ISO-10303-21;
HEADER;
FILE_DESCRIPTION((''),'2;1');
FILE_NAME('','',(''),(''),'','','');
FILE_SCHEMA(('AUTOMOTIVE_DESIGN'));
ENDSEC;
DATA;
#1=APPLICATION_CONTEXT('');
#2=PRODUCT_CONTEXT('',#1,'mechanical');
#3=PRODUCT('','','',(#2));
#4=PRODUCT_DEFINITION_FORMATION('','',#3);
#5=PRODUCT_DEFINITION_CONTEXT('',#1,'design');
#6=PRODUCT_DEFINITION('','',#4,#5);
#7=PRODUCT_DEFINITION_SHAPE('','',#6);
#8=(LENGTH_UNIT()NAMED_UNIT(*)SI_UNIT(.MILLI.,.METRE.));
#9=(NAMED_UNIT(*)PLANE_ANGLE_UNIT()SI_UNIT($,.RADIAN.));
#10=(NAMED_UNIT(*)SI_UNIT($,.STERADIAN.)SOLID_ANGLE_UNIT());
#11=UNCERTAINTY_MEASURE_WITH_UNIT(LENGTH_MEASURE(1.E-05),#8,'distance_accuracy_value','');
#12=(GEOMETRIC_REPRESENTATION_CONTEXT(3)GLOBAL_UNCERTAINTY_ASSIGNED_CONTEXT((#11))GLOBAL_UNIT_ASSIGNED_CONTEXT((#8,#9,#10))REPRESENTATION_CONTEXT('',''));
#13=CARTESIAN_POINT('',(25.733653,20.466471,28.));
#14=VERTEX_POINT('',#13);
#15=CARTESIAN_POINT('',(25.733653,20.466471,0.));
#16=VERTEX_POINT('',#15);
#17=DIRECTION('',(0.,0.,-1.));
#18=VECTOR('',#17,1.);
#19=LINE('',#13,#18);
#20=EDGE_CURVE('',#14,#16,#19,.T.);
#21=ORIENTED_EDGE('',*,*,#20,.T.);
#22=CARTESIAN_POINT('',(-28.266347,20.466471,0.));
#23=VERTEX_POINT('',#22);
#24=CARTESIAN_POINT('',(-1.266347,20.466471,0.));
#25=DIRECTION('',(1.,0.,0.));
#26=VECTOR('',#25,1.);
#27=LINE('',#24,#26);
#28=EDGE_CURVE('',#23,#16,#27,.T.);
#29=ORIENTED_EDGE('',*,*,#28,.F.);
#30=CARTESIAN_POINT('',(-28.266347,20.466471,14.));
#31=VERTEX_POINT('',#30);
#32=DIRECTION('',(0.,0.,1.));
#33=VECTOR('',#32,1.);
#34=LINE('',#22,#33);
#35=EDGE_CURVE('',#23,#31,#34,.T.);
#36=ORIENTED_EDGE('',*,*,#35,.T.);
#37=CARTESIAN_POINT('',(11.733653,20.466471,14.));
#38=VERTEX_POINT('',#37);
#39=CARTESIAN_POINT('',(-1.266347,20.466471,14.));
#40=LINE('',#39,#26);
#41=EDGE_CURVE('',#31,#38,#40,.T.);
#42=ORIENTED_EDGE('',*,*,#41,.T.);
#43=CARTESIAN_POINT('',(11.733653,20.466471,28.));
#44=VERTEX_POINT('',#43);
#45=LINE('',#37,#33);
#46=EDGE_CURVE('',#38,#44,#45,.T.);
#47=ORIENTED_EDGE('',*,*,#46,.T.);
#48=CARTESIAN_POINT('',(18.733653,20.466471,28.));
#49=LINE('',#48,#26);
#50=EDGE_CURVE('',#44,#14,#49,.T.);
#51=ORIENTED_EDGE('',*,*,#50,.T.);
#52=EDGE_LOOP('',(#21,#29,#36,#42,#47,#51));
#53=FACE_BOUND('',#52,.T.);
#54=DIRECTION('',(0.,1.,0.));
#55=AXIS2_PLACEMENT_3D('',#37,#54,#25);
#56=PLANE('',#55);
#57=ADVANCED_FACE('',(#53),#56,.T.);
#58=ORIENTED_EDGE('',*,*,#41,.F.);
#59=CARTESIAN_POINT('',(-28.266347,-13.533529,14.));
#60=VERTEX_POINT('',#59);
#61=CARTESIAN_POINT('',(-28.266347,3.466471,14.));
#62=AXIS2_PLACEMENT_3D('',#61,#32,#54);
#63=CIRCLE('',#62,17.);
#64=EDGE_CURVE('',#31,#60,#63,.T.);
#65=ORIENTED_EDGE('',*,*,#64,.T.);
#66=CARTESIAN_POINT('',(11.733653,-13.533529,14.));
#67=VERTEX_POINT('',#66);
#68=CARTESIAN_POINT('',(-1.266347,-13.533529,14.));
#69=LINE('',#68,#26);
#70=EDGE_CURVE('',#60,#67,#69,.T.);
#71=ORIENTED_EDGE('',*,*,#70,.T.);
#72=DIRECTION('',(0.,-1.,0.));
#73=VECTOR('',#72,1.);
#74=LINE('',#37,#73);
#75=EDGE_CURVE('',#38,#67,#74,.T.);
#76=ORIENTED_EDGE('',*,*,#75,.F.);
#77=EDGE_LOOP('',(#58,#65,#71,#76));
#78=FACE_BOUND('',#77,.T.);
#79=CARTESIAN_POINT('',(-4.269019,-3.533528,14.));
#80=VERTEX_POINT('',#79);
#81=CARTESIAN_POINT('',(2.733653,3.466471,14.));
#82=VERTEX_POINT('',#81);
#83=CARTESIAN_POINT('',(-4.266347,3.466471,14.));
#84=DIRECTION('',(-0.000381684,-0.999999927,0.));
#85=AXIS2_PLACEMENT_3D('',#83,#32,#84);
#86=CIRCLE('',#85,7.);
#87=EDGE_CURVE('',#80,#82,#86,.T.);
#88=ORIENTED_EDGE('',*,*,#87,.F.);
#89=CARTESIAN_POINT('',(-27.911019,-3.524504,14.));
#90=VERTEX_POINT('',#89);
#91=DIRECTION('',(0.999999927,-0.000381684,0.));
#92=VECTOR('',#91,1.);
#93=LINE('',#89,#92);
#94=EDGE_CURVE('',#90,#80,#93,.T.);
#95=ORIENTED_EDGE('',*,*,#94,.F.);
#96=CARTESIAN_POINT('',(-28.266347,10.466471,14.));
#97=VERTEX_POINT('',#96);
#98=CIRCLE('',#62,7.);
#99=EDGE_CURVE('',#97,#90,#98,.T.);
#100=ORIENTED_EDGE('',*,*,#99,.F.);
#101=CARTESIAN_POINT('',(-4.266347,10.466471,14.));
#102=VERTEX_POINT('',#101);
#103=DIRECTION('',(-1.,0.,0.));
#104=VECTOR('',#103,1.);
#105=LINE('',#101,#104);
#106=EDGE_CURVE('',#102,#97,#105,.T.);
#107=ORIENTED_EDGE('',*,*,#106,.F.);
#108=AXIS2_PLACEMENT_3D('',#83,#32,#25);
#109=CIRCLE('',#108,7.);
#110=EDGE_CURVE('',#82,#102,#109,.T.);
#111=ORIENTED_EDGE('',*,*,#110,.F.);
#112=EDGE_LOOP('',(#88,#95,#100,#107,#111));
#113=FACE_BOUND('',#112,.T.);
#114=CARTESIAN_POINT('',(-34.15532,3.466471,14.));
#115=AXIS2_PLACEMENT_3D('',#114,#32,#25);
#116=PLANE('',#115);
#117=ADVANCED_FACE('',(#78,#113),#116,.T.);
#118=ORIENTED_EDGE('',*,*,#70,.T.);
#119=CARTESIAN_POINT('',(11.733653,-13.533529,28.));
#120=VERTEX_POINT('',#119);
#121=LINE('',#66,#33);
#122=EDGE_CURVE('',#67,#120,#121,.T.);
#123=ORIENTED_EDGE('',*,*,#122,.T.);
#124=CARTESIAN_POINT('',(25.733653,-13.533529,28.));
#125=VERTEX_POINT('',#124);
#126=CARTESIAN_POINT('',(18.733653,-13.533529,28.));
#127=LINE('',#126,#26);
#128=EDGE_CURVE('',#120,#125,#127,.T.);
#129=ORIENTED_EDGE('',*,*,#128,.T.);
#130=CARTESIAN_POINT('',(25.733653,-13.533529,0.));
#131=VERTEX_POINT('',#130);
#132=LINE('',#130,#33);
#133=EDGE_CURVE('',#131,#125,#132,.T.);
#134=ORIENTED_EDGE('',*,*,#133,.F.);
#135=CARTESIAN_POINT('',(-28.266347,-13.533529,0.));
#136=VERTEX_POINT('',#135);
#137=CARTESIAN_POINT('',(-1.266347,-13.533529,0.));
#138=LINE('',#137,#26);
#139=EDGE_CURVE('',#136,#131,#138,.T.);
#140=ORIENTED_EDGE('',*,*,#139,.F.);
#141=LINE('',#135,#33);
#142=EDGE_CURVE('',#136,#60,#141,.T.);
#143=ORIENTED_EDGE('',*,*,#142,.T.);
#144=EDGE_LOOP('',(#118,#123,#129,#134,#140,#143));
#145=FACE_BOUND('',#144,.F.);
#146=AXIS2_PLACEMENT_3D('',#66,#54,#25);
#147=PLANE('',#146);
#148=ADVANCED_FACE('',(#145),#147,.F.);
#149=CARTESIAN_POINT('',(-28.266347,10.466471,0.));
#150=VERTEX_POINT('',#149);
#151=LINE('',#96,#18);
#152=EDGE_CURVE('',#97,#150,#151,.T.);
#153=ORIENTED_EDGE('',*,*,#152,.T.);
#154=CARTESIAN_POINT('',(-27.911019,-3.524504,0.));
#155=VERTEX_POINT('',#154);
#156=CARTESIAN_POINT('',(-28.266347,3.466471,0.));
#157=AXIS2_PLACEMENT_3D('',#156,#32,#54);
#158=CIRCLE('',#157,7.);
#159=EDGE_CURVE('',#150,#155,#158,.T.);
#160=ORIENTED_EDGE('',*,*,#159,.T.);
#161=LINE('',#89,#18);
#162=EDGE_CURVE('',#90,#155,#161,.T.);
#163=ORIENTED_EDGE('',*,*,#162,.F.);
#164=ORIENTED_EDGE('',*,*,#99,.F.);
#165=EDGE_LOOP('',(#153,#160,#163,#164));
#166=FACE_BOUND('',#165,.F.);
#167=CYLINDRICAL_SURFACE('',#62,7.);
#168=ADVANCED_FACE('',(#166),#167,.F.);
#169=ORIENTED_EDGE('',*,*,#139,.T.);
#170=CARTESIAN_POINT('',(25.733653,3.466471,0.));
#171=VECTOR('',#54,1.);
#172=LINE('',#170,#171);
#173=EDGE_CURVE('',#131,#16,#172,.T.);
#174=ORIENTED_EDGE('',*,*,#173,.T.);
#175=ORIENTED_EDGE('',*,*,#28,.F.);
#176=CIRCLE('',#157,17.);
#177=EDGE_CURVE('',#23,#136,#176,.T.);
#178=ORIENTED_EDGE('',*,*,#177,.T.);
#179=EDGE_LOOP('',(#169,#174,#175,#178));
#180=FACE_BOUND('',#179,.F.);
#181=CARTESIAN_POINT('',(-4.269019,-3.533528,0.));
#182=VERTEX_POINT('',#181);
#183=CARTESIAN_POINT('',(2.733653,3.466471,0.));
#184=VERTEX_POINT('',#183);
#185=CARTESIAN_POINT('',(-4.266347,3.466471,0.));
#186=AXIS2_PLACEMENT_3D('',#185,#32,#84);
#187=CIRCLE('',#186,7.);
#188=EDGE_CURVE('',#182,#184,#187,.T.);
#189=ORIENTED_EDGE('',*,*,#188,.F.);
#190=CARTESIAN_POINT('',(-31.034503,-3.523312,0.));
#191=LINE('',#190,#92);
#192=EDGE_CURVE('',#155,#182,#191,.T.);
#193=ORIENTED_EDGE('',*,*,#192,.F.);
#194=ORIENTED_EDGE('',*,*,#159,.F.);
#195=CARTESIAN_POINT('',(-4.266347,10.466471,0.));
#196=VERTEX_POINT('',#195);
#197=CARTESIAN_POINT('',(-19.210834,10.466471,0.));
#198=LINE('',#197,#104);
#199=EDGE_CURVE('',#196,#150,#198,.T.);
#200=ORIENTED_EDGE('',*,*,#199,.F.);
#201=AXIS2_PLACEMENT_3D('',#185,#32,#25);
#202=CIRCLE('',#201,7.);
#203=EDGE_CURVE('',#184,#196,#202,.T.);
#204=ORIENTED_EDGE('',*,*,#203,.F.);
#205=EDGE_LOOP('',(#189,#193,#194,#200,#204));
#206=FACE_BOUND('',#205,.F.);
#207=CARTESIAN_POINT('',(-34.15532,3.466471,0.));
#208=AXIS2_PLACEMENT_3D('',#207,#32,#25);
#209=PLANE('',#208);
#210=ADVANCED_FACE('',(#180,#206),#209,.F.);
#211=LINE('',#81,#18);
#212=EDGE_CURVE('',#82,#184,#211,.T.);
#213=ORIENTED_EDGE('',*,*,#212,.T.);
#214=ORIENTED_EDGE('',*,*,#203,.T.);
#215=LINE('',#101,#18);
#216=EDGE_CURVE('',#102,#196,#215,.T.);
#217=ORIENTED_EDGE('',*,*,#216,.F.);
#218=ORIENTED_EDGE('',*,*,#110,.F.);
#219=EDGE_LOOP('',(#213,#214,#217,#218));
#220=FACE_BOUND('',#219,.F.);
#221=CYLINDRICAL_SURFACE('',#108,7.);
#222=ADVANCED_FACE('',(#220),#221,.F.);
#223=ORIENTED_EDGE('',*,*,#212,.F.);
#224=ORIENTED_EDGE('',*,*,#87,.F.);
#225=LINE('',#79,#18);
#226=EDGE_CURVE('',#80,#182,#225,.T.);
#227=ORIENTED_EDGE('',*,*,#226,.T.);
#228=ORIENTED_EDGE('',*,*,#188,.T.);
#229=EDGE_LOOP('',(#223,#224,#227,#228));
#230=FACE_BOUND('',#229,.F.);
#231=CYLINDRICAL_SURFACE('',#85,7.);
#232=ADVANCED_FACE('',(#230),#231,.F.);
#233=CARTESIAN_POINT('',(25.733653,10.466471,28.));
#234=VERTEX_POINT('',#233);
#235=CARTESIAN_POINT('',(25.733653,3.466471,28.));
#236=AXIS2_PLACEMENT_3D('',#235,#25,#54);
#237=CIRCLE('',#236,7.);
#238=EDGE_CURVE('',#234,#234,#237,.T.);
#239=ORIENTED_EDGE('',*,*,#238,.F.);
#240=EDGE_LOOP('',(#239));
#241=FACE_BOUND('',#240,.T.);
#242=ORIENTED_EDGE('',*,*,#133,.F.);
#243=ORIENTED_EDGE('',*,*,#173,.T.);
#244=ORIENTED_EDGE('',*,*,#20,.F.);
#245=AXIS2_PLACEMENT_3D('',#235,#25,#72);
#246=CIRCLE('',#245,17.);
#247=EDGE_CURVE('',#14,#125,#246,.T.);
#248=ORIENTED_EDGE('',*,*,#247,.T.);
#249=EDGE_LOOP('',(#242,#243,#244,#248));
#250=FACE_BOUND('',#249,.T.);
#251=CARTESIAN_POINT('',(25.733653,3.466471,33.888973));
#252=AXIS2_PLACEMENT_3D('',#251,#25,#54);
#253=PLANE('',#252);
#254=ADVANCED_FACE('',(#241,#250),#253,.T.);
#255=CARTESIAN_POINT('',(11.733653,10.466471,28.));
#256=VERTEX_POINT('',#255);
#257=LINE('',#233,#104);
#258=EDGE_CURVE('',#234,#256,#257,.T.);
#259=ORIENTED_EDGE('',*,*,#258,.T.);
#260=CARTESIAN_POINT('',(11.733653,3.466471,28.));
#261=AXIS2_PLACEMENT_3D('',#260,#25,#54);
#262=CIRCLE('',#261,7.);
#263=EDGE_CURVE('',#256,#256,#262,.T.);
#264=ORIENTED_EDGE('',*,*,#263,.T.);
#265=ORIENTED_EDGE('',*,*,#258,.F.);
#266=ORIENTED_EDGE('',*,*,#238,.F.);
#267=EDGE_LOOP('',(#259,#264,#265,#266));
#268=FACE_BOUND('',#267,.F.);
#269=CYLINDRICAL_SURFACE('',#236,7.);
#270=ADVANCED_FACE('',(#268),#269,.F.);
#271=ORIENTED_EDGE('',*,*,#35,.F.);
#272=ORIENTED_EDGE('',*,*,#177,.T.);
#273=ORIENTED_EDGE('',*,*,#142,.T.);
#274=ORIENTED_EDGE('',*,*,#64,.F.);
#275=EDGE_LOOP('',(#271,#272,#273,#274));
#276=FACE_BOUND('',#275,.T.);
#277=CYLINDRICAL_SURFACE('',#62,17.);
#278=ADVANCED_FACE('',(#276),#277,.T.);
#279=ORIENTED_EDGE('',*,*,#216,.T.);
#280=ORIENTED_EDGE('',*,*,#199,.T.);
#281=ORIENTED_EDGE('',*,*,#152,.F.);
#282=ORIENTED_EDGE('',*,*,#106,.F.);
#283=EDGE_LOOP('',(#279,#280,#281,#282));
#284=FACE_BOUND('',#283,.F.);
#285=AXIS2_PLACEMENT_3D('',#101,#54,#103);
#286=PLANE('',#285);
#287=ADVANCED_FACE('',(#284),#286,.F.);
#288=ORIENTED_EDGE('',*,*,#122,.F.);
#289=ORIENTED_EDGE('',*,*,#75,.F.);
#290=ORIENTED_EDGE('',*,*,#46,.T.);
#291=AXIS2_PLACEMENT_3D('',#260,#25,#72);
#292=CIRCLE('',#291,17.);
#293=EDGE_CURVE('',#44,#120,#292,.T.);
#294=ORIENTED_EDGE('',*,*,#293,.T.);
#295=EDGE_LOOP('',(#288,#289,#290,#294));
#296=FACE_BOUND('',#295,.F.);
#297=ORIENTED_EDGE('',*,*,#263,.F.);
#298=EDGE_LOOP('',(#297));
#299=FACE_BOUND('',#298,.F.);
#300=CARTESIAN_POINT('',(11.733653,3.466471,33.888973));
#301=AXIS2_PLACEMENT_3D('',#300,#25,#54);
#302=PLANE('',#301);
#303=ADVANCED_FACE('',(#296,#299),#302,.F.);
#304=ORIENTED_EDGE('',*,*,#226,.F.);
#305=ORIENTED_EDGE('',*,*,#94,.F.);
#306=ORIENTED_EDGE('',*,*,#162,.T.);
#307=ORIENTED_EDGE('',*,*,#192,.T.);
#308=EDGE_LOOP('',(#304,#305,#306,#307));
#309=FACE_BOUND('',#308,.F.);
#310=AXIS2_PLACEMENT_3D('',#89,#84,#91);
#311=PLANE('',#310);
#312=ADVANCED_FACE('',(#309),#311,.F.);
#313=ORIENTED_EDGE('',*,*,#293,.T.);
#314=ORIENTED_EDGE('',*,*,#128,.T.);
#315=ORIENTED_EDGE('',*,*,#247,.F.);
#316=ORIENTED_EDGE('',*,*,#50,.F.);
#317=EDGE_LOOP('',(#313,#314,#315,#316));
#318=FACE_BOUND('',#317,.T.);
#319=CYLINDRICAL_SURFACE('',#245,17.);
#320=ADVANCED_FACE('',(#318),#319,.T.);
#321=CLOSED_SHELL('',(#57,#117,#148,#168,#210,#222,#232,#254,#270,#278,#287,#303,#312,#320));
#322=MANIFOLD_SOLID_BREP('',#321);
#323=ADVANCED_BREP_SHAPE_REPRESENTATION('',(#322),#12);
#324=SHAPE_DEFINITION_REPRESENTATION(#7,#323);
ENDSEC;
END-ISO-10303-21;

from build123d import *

# Parameters (mm, degrees)
F0_W      = 54
F0_H      = 34
F1_DEPTH  = 14
F2_W      = 14
F2_H      = 34
F3_DEPTH  = 14
F5_DEPTH  = 14
F7_DEPTH  = 14
F8_R      = 7
F9_DEPTH  = 25
F11_DEPTH = 25


with BuildPart() as f1:
    # F0 (on Top) → F1 (new body)
    with BuildSketch(Plane.XY):
        with Locations((-1.2663472444, 3.4664713239)):
            Rectangle(F0_W, F0_H)
    extrude(amount=F1_DEPTH)

    # F2 (on face) → F3 (join)
    with BuildSketch(Plane.XY.offset(14)):
        with Locations((18.7336527556, 3.4664713239)):
            Rectangle(F2_W, F2_H)
    extrude(amount=F3_DEPTH)

    # F4 (on face) → F5 (join)
    with BuildSketch(Plane.YZ.offset(25.7336527556)):
        with BuildLine():
            Line((-13.5335286761, 28), (20.4664713239, 28))
            ThreePointArc((20.4664713239, 28), (3.4664713239, 45), (-13.5335286761, 28))
        make_face()
        with BuildLine():
            ThreePointArc((-13.5335286761, 28), (3.4664713239, 11), (20.4664713239, 28))
            Line((20.4664713239, 28), (-13.5335286761, 28))
        make_face()
    extrude(amount=-F5_DEPTH)

    # F6 (on face) → F7 (join)
    with BuildSketch(Plane.XY.offset(14)):
        with BuildLine():
            Line((-28.2663472444, -13.5335286761), (-28.2663472444, 20.4664713239))
            ThreePointArc((-28.2663472444, 20.4664713239), (-45.2663472444, 3.4664713239), (-28.2663472444, -13.5335286761))
        make_face()
    extrude(amount=-F7_DEPTH)

    # F8 (on face) → F9 (cut)
    with BuildSketch(Plane.YZ.offset(25.7336527556)):
        with Locations((3.4664713239, 28)):
            Circle(F8_R)
    extrude(amount=-F9_DEPTH, mode=Mode.SUBTRACT)

    # F10 (on face) → F11 (cut)
    with BuildSketch(Plane.XY.offset(14)):
        with BuildLine():
            ThreePointArc((-27.9110185812, -3.5245043978), (-23.1925271529, -1.3560124427), (-21.2663472444, 3.4664713239))
            ThreePointArc((-21.2663472444, 3.4664713239), (-23.3165997761, 8.4162187922), (-28.2663472444, 10.4664713239))
            ThreePointArc((-28.2663472444, 10.4664713239), (-35.2640908111, 3.2887497041), (-27.9110185812, -3.5245043978))
        make_face()
        with BuildLine():
            ThreePointArc((-28.2663472444, 10.4664713239), (-23.3165997761, 8.4162187922), (-21.2663472444, 3.4664713239))
            ThreePointArc((-21.2663472444, 3.4664713239), (-23.1925271529, -1.3560124427), (-27.9110185812, -3.5245043978))
            Line((-27.9110185812, -3.5245043978), (-4.2690190308, -3.5335281663))
            ThreePointArc((-4.2690190308, -3.5335281663), (-11.2663471169, 3.4678072171), (-4.2663472444, 10.4664713239))
            Line((-4.2663472444, 10.4664713239), (-28.2663472444, 10.4664713239))
        make_face()
        with BuildLine():
            ThreePointArc((2.7336527556, 3.4664713239), (0.6834002239, 8.4162187922), (-4.2663472444, 10.4664713239))
            ThreePointArc((-4.2663472444, 10.4664713239), (-11.2663471169, 3.4678072171), (-4.2690190308, -3.5335281663))
            ThreePointArc((-4.2690190308, -3.5335281663), (0.6824555146, -1.4842206735), (2.7336527556, 3.4664713239))
        make_face()
    extrude(amount=-F11_DEPTH, mode=Mode.SUBTRACT)


solid = f1.part
